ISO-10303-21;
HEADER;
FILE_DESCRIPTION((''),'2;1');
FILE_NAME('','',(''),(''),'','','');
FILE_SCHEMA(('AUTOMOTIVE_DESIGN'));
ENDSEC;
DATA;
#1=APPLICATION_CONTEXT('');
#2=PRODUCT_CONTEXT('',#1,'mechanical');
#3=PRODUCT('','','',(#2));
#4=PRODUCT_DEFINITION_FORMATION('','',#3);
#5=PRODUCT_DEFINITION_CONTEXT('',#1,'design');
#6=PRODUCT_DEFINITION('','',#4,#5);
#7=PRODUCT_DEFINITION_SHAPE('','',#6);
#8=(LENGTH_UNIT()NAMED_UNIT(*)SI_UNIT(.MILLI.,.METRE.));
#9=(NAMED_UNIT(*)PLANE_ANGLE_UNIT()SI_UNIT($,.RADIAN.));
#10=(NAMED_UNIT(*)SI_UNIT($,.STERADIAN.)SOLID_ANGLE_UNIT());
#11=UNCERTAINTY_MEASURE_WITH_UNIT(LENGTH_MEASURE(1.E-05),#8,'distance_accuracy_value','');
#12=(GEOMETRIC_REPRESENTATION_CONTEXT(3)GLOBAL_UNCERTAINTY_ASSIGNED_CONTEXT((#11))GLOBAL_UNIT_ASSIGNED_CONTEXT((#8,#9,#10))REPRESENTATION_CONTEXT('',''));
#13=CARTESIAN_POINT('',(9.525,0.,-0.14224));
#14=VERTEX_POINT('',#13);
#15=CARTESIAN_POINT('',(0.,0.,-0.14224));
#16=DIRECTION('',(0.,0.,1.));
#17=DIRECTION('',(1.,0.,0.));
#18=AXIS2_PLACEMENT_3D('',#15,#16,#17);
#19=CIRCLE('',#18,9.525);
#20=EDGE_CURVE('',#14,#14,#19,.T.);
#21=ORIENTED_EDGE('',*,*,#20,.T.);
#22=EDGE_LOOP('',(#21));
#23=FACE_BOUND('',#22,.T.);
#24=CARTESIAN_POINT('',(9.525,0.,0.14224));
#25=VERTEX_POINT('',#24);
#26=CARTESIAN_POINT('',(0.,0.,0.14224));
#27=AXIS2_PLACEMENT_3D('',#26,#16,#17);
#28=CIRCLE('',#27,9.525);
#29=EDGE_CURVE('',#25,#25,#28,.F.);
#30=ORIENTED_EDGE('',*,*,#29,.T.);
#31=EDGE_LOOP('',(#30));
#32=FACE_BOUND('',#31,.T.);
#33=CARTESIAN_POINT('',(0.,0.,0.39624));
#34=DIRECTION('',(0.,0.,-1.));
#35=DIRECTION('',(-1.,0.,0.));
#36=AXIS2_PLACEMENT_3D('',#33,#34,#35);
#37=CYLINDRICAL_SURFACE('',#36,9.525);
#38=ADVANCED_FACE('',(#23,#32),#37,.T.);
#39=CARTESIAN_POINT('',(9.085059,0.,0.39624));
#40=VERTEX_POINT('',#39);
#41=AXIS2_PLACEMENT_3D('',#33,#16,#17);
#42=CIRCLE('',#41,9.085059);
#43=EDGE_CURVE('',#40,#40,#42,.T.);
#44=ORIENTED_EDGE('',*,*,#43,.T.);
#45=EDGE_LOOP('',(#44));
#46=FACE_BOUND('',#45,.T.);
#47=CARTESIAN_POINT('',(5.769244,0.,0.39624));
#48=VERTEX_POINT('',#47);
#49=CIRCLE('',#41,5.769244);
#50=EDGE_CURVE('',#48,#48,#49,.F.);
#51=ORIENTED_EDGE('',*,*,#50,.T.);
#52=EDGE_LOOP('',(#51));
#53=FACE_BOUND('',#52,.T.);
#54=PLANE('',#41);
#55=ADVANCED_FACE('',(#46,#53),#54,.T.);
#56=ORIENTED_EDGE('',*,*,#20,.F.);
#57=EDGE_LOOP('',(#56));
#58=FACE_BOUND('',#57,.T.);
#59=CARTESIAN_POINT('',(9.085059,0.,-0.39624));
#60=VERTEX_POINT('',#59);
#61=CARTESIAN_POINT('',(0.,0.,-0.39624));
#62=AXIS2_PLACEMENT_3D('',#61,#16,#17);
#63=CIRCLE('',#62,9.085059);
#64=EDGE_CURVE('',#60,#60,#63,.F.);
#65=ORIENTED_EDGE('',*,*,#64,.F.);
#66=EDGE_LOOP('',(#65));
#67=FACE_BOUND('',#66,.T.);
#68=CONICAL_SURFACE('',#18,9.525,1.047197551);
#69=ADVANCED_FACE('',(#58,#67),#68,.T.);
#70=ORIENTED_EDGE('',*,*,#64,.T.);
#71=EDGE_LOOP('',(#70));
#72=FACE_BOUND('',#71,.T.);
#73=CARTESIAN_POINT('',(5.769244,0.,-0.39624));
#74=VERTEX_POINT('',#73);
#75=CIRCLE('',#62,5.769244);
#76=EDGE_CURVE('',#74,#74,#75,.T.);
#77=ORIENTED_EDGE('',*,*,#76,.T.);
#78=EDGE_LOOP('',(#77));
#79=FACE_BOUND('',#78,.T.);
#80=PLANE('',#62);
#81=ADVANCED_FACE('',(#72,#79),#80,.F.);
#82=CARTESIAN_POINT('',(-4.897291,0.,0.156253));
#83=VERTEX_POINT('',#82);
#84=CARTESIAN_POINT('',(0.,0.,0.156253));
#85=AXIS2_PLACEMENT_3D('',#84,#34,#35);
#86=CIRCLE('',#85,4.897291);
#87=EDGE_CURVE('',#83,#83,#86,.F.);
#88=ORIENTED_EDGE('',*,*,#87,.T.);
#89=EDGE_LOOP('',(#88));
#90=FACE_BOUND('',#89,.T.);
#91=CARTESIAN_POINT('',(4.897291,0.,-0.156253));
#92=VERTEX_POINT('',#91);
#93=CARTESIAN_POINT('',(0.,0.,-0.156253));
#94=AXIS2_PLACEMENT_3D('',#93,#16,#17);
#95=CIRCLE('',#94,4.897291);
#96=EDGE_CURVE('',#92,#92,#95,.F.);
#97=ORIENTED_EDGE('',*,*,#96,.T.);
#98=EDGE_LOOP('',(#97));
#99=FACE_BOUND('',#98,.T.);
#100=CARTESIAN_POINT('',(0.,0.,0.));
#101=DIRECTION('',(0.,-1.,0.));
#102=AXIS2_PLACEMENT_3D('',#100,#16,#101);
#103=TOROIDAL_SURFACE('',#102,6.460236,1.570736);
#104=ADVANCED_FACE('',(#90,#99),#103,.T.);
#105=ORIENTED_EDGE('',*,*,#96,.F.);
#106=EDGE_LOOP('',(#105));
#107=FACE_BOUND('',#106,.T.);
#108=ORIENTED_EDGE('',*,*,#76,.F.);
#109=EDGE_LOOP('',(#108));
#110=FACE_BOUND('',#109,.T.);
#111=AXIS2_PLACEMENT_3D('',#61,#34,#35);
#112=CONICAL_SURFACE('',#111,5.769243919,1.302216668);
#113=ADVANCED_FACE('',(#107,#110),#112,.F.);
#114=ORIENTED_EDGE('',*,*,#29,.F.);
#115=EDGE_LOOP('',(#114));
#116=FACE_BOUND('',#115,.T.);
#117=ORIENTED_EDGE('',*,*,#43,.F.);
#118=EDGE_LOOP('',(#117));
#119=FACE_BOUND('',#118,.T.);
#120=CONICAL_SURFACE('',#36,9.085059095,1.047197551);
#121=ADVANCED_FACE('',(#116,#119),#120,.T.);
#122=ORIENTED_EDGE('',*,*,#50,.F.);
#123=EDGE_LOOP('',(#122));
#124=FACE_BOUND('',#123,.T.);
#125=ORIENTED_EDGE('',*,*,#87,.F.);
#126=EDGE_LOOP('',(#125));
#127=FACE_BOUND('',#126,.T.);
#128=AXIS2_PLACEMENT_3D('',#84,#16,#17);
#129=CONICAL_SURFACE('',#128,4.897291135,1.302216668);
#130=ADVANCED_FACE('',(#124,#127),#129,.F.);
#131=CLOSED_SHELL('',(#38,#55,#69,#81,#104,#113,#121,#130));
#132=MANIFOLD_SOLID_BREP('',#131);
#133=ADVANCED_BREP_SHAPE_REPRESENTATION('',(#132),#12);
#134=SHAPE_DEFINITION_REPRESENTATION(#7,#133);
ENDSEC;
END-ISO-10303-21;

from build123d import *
from OCP.BRepFilletAPI import BRepFilletAPI_MakeChamfer

# Parameters (mm, degrees)
BOSS_EXTRUDE1_DEPTH      = 0.39624
BOSS_EXTRUDE1_DEPTH_BACK = 0.39624
SKETCH3_R                = 9.525
SKETCH3_R_2              = 4.8895
CHAMFER1_SIZE            = 0.254
CHAMFER1_SIZE2           = 0.439940905
CHAMFER2_SIZE            = 0.828943919


with BuildPart() as part:
    # Sketch3 → Boss-Extrude1 (new, two sides: drawn at the far end of the back side and taken through both)
    with BuildSketch(Plane.XY.offset(-BOSS_EXTRUDE1_DEPTH_BACK)):
        Circle(SKETCH3_R)
        Circle(SKETCH3_R_2, mode=Mode.SUBTRACT)
    extrude(amount=BOSS_EXTRUDE1_DEPTH + BOSS_EXTRUDE1_DEPTH_BACK)

    # Chamfer1: one chamfer whose edges measure the first distance from different faces: ONE call of the kernel's chamfer builder (chamfer() names one face for all edges)
    chamfer1_edges_1 = [part.edges().sort_by_distance(p)[0] for p in [
        (-9.525, 0, 0.39624),
    ]]
    chamfer1_side_1 = [part.faces().sort_by_distance(p)[0] for p in [
        (-9.525, 0, 0.19812),
    ]]
    chamfer1_edges_2 = [part.edges().sort_by_distance(p)[0] for p in [
        (-9.525, 0, -0.39624),
    ]]
    chamfer1_side_2 = [part.faces().sort_by_distance(p)[0] for p in [
        (-9.525, 0, -0.19812),
    ]]
    chamfer1 = BRepFilletAPI_MakeChamfer(part.part.solid().wrapped)
    for e in chamfer1_edges_1:
        chamfer1.Add(CHAMFER1_SIZE, CHAMFER1_SIZE2, e.wrapped, chamfer1_side_1[0].wrapped)  # the first distance lies on this face
    for e in chamfer1_edges_2:
        chamfer1.Add(CHAMFER1_SIZE, CHAMFER1_SIZE2, e.wrapped, chamfer1_side_2[0].wrapped)  # the first distance lies on this face
    add(Compound.cast(chamfer1.Shape()), mode=Mode.REPLACE)

    # Sketch4 → Cut-Revolve1 (revolve, cut)
    with BuildSketch(Plane(origin=(0, 0, 0), x_dir=(0, 0, -1), z_dir=(1, 0, 0)), mode=Mode.PRIVATE) as cut_revolve1_sk:
        with BuildLine():
            Line((-0.39624, 4.8387), (-0.39624, 4.9403))
            ThreePointArc((-0.39624, 4.9403), (0, 4.8895), (0.39624, 4.9403))
            Line((0.39624, 4.9403), (0.39624, 4.8387))
            Line((0.39624, 4.8387), (-0.39624, 4.8387))
        make_face()
    revolve(cut_revolve1_sk.sketch.rotate(Axis((0, 0, 0.39624), (0, 0, -1)), 90), axis=Axis((0, 0, 0.39624), (0, 0, -1)), mode=Mode.SUBTRACT)

    # Chamfer2
    # the kernel refuses this chamfer: 0.828943919, 0.254 mm, written as the material it takes off along each edge
    with BuildSketch(Plane(origin=(0, 0, -0.39624), x_dir=(1, 0, 0), z_dir=(0, 1, 0))) as chamfer2_piece_1:
        with BuildLine():
            Line((4.9403 + CHAMFER2_SIZE, 0), (4.897291135, -0.239987219))
            ThreePointArc((4.897291135, -0.239987219), (4.91289484, -0.126153132), (4.9403, 0))
            Line((4.9403, 0), (4.9403 + CHAMFER2_SIZE, 0))
        make_face()
    revolve(axis=Axis((0, 0, -0.39624), (0, 0, -1)), mode=Mode.SUBTRACT)
    with BuildSketch(Plane(origin=(0, 0, 0.39624), x_dir=(1, 0, 0), z_dir=(0, 1, 0))) as chamfer2_piece_2:
        with BuildLine():
            Line((4.9403 + CHAMFER2_SIZE, 0), (4.897291135, 0.239987219))
            ThreePointArc((4.897291135, 0.239987219), (4.91289484, 0.126153132), (4.9403, 0))
            Line((4.9403, 0), (4.9403 + CHAMFER2_SIZE, 0))
        make_face()
    revolve(axis=Axis((0, 0, 0.39624), (0, 0, -1)), mode=Mode.SUBTRACT)


solid = part.part
